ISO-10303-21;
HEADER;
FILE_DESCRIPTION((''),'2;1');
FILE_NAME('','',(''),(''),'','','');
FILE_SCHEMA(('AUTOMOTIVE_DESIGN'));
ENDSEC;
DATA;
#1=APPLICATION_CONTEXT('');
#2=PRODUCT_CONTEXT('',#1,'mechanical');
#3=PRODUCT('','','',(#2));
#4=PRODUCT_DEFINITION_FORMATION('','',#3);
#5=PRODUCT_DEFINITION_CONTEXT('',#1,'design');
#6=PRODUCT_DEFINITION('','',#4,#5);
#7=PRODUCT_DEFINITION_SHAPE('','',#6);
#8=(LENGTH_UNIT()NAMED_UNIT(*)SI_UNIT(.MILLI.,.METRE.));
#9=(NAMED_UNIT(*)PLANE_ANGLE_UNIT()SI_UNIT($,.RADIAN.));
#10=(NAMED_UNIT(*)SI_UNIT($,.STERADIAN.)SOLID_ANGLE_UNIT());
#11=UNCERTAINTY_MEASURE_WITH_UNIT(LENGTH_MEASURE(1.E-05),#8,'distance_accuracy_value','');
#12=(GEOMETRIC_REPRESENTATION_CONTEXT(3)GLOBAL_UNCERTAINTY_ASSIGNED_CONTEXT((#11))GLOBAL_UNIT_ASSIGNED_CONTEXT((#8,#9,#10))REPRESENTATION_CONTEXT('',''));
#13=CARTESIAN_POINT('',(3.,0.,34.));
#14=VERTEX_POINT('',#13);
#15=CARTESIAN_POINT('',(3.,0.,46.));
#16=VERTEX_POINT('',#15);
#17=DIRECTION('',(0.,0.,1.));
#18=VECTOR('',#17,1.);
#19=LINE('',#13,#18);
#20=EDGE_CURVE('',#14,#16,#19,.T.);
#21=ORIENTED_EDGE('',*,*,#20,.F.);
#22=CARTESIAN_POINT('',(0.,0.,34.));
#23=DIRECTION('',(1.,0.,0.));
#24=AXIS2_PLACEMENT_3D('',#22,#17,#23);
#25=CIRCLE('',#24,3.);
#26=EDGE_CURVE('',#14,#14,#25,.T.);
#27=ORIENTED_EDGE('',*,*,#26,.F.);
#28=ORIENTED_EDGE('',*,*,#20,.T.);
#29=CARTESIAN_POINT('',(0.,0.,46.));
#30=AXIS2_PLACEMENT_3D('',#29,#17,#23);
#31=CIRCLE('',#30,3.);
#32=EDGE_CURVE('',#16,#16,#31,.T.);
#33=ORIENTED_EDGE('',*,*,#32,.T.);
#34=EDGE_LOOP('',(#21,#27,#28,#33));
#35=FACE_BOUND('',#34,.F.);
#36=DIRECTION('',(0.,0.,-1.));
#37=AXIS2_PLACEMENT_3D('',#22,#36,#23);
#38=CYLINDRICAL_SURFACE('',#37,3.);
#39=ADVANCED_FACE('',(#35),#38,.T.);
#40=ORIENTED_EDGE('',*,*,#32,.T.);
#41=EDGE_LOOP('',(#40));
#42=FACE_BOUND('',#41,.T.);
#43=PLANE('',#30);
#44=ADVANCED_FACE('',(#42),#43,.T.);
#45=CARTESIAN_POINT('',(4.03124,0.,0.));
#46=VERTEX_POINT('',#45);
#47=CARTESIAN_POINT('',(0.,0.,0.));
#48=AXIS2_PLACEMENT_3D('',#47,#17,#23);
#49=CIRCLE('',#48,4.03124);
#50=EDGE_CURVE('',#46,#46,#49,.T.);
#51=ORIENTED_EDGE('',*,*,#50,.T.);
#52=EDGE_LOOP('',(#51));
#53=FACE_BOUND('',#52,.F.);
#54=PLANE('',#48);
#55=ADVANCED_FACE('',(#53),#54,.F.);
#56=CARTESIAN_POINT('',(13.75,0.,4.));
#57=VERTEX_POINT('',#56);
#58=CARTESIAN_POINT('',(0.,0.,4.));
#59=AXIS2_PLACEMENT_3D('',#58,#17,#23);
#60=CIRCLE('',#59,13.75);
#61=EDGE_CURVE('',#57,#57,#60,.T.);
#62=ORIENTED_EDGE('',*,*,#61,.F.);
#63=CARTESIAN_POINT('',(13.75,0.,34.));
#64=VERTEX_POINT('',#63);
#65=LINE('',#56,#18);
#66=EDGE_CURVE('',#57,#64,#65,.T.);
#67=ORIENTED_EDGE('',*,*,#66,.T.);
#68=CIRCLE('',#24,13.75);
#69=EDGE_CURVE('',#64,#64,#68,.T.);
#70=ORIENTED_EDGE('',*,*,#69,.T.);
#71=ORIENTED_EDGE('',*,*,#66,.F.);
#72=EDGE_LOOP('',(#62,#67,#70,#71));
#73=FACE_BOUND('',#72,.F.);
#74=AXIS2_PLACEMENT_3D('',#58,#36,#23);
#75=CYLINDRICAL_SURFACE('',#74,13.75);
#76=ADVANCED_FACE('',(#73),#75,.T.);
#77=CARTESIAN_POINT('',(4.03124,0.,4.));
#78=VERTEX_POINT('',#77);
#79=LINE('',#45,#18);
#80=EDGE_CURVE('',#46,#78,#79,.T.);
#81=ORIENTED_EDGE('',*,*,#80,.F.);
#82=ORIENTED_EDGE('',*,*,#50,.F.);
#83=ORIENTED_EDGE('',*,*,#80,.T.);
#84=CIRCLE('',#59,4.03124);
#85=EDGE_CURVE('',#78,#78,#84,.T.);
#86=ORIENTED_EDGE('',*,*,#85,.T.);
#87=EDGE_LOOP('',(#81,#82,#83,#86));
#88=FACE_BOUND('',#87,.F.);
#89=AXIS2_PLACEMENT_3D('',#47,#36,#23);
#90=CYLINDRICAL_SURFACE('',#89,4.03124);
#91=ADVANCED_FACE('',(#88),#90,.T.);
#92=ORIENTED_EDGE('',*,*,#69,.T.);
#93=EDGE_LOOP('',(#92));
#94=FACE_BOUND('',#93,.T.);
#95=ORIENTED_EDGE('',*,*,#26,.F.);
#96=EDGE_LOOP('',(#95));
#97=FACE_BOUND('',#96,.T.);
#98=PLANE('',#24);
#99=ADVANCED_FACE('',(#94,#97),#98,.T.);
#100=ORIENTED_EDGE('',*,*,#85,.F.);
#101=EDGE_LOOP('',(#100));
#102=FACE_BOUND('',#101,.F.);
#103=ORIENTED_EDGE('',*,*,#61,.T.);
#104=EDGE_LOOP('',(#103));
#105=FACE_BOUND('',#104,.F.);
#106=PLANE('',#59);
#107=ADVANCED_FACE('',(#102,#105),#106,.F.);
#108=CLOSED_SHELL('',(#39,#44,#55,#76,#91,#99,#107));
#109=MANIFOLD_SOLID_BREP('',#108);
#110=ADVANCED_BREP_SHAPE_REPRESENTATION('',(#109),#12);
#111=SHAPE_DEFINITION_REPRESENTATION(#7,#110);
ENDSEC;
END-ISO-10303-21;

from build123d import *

# Parameters (mm, degrees)
F0_R     = 4.03124
F1_DEPTH = 4
F2_R     = 13.75
F3_DEPTH = 30
F4_R     = 3
F5_DEPTH = 12


# Not quite as in the source:
# - a feature names something its author has since deleted; it is built from what else it names


with BuildPart() as f1:
    # F0 (on Top) → F1 (new body)
    with BuildSketch(Plane.XY):
        Circle(F0_R)
    extrude(amount=F1_DEPTH)

    # F2 (on face) → F3 (join)
    with BuildSketch(Plane.XY.offset(4)):
        Circle(F2_R)
    extrude(amount=F3_DEPTH)

    # F4 (on face) → F5 (join)
    with BuildSketch(Plane.XY.offset(34)):
        Circle(F4_R)
    extrude(amount=F5_DEPTH)


solid = f1.part
